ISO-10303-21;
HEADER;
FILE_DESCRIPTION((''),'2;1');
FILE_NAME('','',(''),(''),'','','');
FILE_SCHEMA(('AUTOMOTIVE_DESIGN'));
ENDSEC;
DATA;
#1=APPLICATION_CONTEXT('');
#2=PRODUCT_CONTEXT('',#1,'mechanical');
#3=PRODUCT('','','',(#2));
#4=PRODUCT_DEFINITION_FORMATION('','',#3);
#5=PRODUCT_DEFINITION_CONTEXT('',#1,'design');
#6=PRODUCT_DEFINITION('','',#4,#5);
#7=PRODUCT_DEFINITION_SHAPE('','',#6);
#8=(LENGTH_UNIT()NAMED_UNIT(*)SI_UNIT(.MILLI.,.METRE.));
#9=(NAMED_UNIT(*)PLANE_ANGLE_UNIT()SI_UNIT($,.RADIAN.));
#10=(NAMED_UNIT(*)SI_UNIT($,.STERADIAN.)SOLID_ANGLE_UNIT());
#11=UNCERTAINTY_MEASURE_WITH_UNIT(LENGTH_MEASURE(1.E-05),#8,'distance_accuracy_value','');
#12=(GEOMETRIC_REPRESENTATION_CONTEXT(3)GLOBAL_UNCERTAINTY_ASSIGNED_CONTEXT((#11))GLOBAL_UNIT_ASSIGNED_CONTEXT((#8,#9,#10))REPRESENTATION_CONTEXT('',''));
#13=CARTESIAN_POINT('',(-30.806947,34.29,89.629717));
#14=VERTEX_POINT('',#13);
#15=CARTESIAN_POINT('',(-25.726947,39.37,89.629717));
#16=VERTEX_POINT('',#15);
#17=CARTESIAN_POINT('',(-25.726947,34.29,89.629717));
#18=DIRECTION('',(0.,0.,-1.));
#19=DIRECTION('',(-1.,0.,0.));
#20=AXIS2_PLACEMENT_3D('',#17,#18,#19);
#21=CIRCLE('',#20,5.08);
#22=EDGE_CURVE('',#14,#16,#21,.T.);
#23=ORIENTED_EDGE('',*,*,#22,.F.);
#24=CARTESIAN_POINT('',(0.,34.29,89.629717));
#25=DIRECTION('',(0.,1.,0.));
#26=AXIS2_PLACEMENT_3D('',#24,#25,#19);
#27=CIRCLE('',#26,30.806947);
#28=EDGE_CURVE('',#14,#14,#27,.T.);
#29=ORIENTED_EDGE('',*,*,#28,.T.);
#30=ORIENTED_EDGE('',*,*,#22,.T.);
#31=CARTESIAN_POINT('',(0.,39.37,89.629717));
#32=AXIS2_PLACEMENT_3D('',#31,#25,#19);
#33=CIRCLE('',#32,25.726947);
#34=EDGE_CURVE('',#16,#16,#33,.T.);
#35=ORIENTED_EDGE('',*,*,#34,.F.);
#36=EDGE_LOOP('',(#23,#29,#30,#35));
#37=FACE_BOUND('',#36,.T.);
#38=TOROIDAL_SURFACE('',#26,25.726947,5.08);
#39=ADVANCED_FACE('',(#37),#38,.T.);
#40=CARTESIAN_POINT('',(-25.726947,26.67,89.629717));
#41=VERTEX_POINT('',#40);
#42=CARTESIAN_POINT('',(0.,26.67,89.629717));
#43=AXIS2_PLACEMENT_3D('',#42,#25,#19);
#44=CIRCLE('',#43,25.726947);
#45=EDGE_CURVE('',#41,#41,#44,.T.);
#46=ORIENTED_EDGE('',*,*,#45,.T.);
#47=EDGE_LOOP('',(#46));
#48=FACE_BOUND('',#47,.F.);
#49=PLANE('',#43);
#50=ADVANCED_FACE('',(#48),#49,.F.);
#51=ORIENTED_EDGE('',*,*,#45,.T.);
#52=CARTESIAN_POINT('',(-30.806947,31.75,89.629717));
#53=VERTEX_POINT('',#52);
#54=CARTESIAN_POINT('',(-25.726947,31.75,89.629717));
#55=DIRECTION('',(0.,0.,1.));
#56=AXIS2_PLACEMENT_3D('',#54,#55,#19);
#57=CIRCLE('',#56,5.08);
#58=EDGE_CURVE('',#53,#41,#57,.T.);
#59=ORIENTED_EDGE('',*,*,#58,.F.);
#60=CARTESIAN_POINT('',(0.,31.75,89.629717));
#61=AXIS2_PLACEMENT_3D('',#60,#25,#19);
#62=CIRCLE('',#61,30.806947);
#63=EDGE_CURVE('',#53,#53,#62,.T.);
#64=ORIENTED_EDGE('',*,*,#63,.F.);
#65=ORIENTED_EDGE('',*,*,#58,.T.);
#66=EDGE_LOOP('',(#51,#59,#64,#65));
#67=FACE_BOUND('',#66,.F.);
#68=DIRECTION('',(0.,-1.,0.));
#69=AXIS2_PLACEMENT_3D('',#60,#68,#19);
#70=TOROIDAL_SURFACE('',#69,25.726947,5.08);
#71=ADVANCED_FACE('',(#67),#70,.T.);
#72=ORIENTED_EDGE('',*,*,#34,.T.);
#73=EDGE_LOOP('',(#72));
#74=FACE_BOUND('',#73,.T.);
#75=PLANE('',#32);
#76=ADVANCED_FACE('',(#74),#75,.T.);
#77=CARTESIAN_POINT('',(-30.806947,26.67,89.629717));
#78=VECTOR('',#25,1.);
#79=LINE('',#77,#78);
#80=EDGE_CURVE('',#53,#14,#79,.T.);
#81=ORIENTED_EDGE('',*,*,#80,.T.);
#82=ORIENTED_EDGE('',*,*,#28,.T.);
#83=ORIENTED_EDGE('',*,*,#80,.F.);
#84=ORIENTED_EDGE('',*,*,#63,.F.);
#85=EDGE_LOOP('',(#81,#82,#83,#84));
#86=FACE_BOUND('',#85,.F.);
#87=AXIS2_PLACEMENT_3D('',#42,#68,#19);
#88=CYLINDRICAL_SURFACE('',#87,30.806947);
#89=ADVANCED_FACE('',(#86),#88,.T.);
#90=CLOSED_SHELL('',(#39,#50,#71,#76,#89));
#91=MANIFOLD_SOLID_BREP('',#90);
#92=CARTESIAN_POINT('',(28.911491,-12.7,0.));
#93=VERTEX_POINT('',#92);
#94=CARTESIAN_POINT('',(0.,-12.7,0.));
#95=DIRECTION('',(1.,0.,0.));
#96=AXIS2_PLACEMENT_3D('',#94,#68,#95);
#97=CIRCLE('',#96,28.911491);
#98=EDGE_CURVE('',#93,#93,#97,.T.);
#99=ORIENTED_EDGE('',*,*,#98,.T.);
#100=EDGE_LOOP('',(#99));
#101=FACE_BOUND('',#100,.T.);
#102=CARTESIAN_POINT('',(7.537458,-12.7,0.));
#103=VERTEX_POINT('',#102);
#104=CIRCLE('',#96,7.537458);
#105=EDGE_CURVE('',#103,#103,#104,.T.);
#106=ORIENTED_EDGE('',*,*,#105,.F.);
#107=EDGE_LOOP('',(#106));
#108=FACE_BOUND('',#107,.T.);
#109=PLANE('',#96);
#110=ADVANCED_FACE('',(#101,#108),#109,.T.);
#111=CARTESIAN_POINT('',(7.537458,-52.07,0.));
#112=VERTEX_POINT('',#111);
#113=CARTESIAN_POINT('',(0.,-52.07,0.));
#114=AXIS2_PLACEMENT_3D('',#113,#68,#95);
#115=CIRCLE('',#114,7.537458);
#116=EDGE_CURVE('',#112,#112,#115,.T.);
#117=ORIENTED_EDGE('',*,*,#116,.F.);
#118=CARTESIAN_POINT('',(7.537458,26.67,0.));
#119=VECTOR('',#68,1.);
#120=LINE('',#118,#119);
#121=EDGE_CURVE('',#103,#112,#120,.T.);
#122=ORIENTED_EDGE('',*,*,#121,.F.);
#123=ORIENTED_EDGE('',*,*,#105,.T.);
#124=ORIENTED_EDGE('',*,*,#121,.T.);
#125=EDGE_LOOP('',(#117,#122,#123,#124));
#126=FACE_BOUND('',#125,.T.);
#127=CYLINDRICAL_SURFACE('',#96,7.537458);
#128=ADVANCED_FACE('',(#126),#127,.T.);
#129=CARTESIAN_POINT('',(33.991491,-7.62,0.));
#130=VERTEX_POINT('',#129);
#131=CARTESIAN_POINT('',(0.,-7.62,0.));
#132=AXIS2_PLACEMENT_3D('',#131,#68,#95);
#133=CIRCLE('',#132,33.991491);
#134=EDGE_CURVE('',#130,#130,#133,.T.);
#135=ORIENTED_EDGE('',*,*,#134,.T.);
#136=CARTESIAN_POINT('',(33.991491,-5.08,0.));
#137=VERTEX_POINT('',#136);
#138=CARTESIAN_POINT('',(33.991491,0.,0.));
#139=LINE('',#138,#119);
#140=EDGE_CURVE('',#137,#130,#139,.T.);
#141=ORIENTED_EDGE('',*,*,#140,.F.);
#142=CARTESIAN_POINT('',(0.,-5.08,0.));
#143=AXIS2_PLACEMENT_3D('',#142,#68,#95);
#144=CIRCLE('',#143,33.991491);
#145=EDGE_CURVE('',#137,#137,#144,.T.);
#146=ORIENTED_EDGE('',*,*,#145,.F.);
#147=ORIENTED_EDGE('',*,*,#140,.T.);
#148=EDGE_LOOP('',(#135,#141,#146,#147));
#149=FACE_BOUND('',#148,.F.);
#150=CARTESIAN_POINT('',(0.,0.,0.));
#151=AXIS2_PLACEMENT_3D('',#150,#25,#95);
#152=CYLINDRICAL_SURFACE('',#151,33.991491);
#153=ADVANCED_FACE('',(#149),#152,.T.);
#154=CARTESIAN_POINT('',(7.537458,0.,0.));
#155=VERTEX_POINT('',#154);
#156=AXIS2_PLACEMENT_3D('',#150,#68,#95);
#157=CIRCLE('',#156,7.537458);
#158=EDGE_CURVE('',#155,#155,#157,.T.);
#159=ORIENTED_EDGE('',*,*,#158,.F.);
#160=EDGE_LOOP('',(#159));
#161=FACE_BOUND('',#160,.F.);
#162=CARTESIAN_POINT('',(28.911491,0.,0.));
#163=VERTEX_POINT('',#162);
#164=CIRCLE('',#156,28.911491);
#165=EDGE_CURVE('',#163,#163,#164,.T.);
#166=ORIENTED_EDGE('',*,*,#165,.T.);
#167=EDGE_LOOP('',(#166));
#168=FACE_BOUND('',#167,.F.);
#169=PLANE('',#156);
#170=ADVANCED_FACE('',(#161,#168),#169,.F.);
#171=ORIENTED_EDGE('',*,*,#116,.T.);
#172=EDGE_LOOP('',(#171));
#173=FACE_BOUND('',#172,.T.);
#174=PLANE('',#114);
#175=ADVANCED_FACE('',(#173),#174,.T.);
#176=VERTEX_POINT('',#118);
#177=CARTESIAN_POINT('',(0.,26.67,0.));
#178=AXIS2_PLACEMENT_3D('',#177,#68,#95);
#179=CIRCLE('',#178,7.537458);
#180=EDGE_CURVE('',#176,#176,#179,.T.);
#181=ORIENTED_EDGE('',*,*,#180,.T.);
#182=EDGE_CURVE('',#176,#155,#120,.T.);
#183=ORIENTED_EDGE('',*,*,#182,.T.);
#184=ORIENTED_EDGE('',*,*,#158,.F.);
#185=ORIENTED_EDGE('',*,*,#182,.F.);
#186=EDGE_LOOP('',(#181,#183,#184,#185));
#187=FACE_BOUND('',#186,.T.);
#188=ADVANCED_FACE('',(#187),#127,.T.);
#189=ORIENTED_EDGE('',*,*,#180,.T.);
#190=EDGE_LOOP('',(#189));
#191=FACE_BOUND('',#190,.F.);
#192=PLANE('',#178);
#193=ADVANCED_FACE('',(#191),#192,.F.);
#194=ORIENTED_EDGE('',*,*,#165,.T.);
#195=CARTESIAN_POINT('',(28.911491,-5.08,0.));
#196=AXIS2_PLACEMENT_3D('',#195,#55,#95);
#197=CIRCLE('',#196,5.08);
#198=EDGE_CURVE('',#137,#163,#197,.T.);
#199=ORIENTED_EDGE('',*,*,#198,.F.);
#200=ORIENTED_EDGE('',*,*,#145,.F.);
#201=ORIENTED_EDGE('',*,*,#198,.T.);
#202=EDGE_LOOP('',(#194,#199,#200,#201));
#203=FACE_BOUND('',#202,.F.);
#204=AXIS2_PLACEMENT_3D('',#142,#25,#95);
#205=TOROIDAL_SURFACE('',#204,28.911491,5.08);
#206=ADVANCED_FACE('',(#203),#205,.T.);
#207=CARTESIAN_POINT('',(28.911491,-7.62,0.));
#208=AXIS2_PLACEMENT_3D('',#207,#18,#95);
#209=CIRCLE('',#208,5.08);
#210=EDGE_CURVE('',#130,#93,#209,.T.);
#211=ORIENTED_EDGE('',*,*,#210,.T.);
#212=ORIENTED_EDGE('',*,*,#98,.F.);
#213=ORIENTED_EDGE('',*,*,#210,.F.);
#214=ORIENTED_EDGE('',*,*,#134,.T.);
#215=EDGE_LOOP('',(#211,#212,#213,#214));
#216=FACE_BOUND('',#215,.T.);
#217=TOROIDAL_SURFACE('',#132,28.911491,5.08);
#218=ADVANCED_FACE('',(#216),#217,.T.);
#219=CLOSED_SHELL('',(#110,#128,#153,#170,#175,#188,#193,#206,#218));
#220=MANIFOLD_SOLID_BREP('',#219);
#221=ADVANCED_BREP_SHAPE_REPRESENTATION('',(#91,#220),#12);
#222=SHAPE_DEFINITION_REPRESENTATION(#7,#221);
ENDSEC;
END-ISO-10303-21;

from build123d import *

# Parameters (mm, degrees)
F0_R     = 33.9914907239
F1_DEPTH = 12.7
F2_R     = 5.08
F3_R     = 7.5374575826
F4_DEPTH = 39.37
F7_R     = 30.8069471107
F8_DEPTH = 12.7
F9_R     = 5.08


# Not quite as in the source:
# - a feature of the source that left no trace in its solid (it failed there, or was rolled back) is left out


with BuildPart() as f1:
    # F0 (on Front) → F1 (new body)
    with BuildSketch(Plane.XZ):
        Circle(F0_R)
    extrude(amount=F1_DEPTH)

    # F2
    f2_edges = [f1.edges().sort_by_distance(p)[0] for p in [
        (-33.991491, -12.7, 0),
        (-33.991491, 0, 0),
    ]]
    fillet(f2_edges, radius=F2_R)

    # F3 (on face) → F4 (join, symmetric)
    with BuildSketch(Plane.XZ.offset(12.7)):
        Circle(F3_R)
    extrude(amount=F4_DEPTH, both=True)


with BuildPart() as f8:
    # F7 (on face) → F8 (new body)
    with BuildSketch(Plane(origin=(0, 26.67, 0), x_dir=(-1, 0, 0), z_dir=(0, 1, 0))):
        with Locations((0, 89.6297171712)):
            Circle(F7_R)
    extrude(amount=F8_DEPTH)

    # F9
    f9_edges = [f8.edges().sort_by_distance(p)[0] for p in [
        (30.806947, 39.37, 89.629717),
        (30.806947, 26.67, 89.629717),
    ]]
    fillet(f9_edges, radius=F9_R)


solid = Compound([f1.part, f8.part])
